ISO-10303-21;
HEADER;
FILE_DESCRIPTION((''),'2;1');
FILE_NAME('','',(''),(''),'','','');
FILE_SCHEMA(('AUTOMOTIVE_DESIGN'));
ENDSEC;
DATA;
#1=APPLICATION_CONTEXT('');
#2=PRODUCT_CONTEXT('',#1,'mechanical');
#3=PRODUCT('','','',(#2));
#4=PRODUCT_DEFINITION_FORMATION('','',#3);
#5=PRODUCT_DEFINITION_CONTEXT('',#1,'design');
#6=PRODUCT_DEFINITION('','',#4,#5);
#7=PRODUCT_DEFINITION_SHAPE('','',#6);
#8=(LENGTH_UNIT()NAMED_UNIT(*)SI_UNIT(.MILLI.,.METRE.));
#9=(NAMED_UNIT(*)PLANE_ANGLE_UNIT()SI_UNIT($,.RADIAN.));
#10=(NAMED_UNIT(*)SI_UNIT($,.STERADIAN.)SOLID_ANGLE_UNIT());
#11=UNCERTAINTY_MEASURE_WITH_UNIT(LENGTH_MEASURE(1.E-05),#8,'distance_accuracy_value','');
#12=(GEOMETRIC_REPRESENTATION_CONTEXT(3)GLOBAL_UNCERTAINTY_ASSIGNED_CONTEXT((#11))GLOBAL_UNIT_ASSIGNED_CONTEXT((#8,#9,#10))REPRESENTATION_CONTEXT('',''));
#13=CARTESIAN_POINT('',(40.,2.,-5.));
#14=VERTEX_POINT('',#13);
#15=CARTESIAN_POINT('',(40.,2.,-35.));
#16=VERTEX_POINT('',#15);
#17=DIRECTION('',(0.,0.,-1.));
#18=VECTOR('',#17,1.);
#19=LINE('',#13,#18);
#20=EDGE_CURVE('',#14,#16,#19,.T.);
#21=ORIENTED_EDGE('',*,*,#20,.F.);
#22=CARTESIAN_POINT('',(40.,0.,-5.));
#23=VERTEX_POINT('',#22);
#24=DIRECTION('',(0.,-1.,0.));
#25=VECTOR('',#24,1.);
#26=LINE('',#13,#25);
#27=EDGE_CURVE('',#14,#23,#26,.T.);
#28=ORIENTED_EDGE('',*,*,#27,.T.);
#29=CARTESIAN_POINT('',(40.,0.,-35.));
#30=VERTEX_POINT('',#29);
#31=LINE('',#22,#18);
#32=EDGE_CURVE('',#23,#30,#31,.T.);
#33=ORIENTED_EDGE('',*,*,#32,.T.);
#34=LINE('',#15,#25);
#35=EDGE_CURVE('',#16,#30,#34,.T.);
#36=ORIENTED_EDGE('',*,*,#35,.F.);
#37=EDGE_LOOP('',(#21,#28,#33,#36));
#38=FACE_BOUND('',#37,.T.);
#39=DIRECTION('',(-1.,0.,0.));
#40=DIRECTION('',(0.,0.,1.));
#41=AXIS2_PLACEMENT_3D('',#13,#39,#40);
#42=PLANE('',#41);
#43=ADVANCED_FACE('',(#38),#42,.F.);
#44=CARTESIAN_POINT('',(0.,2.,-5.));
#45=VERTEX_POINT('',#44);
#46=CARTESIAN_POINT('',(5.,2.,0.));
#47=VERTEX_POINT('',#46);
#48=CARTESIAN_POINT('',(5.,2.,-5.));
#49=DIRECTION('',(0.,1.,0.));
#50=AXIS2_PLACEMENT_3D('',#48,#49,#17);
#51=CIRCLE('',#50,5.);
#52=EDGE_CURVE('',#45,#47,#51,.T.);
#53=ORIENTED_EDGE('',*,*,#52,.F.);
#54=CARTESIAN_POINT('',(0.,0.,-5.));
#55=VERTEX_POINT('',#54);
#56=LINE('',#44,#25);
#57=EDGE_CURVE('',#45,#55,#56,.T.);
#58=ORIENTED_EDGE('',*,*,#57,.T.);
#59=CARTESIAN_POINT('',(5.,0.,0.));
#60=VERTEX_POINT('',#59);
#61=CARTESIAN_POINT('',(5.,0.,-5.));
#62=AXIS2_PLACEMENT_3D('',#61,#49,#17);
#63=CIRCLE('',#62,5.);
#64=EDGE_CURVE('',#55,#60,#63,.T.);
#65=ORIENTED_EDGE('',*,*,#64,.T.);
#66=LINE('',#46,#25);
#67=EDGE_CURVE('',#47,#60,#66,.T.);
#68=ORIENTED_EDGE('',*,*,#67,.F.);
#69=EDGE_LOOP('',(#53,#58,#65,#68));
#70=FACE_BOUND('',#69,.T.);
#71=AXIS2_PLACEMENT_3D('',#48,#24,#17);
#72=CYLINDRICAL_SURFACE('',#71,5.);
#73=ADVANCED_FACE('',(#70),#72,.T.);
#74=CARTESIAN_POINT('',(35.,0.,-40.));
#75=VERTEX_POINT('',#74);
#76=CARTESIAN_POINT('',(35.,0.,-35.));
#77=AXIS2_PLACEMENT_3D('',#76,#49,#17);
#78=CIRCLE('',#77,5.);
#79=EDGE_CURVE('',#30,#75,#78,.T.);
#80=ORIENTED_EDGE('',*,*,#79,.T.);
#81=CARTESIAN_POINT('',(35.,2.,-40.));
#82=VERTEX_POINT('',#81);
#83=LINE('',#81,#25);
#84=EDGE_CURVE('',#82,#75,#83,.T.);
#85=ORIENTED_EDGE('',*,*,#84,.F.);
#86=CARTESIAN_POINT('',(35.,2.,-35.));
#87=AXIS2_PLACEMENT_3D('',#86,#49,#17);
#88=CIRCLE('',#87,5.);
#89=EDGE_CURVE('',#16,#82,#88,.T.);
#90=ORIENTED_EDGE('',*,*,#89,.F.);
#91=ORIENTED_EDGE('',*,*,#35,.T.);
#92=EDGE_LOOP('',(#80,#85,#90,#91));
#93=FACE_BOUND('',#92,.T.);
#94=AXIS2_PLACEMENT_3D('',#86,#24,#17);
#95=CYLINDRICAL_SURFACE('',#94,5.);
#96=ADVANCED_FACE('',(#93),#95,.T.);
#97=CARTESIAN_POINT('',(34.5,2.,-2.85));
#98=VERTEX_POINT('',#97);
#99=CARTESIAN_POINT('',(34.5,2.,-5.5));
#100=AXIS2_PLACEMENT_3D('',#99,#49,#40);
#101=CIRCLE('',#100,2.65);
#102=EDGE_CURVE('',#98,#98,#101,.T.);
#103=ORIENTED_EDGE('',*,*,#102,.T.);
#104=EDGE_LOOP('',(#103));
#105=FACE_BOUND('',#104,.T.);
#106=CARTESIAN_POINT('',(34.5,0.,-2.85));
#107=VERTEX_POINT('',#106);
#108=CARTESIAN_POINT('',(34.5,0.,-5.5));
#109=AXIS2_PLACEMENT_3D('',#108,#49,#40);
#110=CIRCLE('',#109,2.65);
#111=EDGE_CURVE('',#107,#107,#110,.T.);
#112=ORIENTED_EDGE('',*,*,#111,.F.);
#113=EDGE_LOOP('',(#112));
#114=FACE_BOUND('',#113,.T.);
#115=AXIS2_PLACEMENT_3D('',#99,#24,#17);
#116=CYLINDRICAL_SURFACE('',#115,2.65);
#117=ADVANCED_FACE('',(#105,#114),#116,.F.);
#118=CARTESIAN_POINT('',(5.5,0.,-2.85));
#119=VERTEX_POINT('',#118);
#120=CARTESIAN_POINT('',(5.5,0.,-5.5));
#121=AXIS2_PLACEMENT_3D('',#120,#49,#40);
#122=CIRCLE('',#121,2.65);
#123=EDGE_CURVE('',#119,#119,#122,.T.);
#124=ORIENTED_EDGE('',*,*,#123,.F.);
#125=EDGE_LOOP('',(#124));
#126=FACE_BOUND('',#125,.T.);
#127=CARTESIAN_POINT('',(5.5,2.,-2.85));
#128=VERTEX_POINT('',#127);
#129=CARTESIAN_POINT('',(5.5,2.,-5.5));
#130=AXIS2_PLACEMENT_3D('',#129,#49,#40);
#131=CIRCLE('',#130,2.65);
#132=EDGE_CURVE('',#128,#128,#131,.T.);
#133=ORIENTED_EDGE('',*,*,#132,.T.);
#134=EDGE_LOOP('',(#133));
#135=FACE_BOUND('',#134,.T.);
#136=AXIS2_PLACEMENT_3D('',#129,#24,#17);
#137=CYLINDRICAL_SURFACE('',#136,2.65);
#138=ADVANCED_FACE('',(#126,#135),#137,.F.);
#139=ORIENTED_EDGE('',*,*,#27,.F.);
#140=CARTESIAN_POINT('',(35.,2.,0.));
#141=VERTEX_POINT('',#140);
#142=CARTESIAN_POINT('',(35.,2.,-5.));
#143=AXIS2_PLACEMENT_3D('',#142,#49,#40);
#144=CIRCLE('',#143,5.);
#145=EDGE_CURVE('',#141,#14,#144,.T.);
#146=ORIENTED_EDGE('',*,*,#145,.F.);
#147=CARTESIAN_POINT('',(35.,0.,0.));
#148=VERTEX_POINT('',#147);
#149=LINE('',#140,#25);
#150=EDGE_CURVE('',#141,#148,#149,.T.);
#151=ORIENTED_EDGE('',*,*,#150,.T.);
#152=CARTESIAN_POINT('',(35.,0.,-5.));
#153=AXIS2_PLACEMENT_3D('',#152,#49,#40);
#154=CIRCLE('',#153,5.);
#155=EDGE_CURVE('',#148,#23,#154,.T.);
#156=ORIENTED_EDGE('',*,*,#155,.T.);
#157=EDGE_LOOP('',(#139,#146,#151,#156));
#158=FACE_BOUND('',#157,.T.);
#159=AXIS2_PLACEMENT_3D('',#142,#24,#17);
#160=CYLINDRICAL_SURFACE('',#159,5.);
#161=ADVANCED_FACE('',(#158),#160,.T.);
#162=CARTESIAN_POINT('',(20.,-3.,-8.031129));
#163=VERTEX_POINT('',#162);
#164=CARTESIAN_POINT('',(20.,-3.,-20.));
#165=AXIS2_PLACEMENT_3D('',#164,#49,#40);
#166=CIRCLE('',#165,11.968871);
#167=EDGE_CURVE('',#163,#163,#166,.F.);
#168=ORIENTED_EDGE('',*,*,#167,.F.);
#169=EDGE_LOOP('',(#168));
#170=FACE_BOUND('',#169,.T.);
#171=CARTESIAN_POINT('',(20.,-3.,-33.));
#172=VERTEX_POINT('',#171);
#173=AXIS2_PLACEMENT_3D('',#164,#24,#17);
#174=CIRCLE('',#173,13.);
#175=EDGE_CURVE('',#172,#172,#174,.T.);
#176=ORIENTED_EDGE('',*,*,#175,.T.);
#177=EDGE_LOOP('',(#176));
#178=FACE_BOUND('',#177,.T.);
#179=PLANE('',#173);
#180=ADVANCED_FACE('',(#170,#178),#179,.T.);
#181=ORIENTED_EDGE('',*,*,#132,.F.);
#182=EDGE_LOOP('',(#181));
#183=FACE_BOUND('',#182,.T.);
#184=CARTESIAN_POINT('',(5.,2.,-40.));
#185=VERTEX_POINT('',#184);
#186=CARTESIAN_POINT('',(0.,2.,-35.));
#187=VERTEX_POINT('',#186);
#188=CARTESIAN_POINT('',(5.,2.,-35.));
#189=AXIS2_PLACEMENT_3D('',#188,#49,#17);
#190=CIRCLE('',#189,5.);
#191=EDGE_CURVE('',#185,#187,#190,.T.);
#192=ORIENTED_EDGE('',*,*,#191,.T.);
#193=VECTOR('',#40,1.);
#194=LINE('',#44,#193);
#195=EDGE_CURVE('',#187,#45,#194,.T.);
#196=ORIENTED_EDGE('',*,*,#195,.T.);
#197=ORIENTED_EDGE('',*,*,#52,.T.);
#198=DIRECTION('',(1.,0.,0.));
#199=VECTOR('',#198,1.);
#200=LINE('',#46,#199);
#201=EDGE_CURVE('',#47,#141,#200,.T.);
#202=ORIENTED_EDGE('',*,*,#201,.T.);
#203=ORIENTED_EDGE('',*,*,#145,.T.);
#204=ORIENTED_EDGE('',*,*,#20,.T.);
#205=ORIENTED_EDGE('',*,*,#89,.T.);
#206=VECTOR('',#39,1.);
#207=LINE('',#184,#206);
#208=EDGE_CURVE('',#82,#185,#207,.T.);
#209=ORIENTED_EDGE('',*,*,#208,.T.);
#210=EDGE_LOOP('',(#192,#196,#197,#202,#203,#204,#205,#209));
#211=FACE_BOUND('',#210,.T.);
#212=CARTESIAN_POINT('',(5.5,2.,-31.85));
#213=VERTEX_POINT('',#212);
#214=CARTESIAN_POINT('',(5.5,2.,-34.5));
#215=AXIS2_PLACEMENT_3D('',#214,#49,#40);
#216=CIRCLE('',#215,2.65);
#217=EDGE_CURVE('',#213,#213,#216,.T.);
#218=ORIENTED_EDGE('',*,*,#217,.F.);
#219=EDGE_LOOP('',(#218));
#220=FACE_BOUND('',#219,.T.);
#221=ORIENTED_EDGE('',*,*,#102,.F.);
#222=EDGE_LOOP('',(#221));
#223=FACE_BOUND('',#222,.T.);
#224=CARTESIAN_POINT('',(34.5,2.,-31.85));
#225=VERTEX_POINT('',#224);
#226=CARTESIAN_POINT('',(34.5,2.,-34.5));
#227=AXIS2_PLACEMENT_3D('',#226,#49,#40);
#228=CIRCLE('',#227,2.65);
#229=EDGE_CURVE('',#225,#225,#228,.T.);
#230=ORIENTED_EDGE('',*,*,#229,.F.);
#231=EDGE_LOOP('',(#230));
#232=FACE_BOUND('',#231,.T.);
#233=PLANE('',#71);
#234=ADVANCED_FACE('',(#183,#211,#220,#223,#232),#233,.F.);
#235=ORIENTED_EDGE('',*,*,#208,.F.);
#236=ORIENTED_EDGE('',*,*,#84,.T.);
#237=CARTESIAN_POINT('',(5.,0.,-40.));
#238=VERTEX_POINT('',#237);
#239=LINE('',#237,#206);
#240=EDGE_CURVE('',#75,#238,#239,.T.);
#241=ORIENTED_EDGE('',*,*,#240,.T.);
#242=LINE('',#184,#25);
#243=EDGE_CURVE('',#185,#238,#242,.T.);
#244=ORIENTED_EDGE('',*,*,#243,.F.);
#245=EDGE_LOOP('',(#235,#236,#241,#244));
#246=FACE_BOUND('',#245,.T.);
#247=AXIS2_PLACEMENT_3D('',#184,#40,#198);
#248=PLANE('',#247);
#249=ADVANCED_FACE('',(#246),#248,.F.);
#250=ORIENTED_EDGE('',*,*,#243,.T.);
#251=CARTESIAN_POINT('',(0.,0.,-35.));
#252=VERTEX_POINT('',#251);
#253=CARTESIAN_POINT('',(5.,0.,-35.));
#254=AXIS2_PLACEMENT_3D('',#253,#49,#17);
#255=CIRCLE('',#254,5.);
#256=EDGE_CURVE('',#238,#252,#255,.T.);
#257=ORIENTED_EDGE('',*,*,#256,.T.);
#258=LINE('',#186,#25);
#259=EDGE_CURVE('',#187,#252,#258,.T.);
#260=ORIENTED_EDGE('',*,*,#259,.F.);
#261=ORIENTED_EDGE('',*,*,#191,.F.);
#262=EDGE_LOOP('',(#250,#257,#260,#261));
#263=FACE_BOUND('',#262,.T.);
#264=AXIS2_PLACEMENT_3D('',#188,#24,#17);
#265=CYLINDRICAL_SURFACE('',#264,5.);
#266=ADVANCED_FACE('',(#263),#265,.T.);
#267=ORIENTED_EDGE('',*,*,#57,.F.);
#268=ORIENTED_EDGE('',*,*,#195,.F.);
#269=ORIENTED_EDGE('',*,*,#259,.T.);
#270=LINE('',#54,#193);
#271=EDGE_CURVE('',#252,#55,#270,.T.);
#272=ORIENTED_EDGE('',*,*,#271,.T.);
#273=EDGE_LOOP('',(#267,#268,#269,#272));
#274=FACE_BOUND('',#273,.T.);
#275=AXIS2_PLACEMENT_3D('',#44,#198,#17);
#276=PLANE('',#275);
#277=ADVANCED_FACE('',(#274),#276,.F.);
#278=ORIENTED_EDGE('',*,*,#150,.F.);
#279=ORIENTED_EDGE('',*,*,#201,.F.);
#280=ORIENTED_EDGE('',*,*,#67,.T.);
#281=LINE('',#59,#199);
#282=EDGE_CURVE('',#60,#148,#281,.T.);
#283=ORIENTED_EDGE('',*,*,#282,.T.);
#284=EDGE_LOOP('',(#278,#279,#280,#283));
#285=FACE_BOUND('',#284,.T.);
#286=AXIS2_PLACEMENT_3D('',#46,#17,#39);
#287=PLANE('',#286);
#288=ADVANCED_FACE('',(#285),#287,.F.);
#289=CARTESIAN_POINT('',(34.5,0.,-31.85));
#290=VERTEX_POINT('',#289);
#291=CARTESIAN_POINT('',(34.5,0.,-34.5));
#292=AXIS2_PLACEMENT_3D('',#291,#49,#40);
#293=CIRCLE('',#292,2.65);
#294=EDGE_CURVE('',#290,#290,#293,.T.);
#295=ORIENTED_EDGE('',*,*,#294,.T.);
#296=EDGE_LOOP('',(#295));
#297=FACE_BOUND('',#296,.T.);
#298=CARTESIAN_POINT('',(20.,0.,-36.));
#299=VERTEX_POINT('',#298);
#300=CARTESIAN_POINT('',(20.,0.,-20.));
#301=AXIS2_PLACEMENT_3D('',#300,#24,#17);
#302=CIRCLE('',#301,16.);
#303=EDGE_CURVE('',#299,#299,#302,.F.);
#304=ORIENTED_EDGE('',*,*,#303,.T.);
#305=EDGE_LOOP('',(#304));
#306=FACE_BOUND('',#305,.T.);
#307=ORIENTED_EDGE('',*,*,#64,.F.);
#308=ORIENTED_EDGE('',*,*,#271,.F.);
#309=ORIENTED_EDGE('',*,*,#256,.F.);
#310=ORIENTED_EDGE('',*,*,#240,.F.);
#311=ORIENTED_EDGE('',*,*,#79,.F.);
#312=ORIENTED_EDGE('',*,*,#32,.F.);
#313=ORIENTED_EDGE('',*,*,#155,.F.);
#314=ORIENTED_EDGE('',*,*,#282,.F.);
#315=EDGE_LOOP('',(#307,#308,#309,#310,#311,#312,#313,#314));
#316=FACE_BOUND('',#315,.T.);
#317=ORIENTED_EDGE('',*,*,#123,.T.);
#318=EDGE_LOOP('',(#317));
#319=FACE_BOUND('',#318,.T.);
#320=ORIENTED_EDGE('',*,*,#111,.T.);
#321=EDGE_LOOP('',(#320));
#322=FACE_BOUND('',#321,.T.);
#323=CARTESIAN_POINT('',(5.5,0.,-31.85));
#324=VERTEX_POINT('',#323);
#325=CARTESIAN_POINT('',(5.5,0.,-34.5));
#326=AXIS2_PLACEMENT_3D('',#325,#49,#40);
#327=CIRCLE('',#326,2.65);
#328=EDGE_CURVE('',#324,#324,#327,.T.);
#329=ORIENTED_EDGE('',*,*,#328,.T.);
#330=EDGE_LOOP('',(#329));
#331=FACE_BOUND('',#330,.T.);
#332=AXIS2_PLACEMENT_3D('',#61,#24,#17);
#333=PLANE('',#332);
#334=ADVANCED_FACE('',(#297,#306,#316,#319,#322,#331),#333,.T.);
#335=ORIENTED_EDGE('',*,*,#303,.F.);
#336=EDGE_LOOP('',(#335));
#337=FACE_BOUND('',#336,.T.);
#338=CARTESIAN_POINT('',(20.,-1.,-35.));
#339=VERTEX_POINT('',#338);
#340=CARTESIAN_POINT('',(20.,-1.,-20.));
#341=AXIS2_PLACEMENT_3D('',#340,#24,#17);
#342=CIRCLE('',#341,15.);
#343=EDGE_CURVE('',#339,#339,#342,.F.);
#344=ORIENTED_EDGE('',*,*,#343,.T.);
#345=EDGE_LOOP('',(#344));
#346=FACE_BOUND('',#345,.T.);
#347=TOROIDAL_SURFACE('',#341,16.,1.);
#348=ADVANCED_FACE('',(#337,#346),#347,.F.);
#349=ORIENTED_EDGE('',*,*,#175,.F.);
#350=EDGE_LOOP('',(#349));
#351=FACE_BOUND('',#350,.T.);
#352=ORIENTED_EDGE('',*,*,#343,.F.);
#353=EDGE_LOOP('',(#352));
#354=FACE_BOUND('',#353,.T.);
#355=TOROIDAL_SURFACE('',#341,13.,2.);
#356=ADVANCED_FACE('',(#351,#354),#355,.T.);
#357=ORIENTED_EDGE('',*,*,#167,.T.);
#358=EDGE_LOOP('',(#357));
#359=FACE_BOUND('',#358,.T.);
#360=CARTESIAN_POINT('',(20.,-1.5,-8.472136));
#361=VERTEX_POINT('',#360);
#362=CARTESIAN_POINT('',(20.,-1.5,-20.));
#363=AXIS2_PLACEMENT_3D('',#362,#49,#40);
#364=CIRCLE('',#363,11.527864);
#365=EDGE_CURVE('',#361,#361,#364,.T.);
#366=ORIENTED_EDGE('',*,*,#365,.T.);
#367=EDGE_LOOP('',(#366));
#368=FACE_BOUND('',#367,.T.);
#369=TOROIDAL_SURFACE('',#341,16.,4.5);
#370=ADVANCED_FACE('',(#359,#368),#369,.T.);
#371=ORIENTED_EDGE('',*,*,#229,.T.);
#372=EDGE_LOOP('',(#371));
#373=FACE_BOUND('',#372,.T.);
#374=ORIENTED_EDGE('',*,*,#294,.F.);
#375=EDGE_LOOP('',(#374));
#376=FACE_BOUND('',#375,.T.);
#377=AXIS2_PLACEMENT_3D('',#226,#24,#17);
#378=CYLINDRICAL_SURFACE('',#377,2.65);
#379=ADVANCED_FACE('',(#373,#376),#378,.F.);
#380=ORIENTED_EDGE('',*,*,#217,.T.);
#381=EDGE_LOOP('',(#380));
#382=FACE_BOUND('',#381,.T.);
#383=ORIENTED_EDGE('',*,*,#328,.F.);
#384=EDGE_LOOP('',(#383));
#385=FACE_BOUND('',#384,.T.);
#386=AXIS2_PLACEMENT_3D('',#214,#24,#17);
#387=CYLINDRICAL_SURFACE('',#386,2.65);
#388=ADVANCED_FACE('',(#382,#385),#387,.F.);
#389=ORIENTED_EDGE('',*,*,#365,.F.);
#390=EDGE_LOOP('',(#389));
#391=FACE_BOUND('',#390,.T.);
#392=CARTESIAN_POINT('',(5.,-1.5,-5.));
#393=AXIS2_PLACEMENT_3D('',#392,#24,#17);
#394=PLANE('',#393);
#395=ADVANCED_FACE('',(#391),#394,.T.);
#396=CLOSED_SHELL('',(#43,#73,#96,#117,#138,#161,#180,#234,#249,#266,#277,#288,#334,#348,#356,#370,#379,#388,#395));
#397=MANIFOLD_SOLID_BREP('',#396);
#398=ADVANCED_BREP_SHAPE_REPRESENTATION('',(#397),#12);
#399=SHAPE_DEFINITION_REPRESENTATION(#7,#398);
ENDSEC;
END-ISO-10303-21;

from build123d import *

# Parameters (mm, degrees)
SKETCH1_R           = 2.65
BOSS_EXTRUDE1_DEPTH = 2
SKETCH4_R           = 15
BOSS_EXTRUDE2_DEPTH = 3
FILLET1_R           = 2
FILLET2_R           = 1


# Read off the part's stored shape, not the designer's step: Shell2
with BuildPart() as part:
    # Sketch1 → Boss-Extrude1 (new body)
    with BuildSketch(Plane(origin=(0, 0, 0), x_dir=(1, 0, 0), z_dir=(0, 1, 0))):
        with BuildLine():
            Line((5, 0), (35, 0))
            ThreePointArc((35, 0), (38.535533906, 1.464466094), (40, 5))
            Line((40, 5), (40, 35))
            ThreePointArc((40, 35), (38.535533906, 38.535533906), (35, 40))
            Line((35, 40), (5, 40))
            ThreePointArc((5, 40), (1.464466094, 38.535533906), (0, 35))
            Line((0, 35), (0, 5))
            ThreePointArc((0, 5), (1.464466094, 1.464466094), (5, 0))
        make_face()
        with Locations(Location((5.5, 34.5, 0), (0, 0, 270))):
            Circle(SKETCH1_R, mode=Mode.SUBTRACT)
        with Locations(Location((34.5, 34.5, 0), (0, 0, 270))):
            Circle(SKETCH1_R, mode=Mode.SUBTRACT)
        with Locations(Location((34.5, 5.5, 0), (0, 0, 270))):
            Circle(SKETCH1_R, mode=Mode.SUBTRACT)
        with Locations(Location((5.5, 5.5, 0), (0, 0, 270))):
            Circle(SKETCH1_R, mode=Mode.SUBTRACT)
    extrude(amount=BOSS_EXTRUDE1_DEPTH)

    # Sketch4 → Boss-Extrude2 (add)
    with BuildSketch(Plane.XZ):
        with Locations(Location((20, -20, 0), (0, 0, 270))):
            Circle(SKETCH4_R)
    extrude(amount=BOSS_EXTRUDE2_DEPTH)

    # Fillet1
    fillet1_edges = [part.edges().sort_by_distance(p)[0] for p in [
        (20, -3, -5),
    ]]
    fillet(fillet1_edges, radius=FILLET1_R)

    # Fillet2
    fillet2_edges = [part.edges().sort_by_distance(p)[0] for p in [
        (20, 0, -5),
    ]]
    fillet(fillet2_edges, radius=FILLET2_R - 0.0001)  # a hair under: the kernel refuses the full size

    # Shell2 outline → Shell2 (revolve, cut)
    with BuildSketch(Plane(origin=(20, 0, -20), x_dir=(1, 0, 0), z_dir=(0, 0, 1))):
        with BuildLine():
            Line((0, -3), (11.968871126, -3))
            ThreePointArc((11.968871126, -3), (11.68272329, -2.269299733), (11.527864045, -1.5))
            Line((11.527864045, -1.5), (0, -1.5))
            Line((0, -1.5), (0, -3))
        make_face()
    revolve(axis=Axis((20, 0, -20), (0, 1, 0)), mode=Mode.SUBTRACT)


solid = part.part
